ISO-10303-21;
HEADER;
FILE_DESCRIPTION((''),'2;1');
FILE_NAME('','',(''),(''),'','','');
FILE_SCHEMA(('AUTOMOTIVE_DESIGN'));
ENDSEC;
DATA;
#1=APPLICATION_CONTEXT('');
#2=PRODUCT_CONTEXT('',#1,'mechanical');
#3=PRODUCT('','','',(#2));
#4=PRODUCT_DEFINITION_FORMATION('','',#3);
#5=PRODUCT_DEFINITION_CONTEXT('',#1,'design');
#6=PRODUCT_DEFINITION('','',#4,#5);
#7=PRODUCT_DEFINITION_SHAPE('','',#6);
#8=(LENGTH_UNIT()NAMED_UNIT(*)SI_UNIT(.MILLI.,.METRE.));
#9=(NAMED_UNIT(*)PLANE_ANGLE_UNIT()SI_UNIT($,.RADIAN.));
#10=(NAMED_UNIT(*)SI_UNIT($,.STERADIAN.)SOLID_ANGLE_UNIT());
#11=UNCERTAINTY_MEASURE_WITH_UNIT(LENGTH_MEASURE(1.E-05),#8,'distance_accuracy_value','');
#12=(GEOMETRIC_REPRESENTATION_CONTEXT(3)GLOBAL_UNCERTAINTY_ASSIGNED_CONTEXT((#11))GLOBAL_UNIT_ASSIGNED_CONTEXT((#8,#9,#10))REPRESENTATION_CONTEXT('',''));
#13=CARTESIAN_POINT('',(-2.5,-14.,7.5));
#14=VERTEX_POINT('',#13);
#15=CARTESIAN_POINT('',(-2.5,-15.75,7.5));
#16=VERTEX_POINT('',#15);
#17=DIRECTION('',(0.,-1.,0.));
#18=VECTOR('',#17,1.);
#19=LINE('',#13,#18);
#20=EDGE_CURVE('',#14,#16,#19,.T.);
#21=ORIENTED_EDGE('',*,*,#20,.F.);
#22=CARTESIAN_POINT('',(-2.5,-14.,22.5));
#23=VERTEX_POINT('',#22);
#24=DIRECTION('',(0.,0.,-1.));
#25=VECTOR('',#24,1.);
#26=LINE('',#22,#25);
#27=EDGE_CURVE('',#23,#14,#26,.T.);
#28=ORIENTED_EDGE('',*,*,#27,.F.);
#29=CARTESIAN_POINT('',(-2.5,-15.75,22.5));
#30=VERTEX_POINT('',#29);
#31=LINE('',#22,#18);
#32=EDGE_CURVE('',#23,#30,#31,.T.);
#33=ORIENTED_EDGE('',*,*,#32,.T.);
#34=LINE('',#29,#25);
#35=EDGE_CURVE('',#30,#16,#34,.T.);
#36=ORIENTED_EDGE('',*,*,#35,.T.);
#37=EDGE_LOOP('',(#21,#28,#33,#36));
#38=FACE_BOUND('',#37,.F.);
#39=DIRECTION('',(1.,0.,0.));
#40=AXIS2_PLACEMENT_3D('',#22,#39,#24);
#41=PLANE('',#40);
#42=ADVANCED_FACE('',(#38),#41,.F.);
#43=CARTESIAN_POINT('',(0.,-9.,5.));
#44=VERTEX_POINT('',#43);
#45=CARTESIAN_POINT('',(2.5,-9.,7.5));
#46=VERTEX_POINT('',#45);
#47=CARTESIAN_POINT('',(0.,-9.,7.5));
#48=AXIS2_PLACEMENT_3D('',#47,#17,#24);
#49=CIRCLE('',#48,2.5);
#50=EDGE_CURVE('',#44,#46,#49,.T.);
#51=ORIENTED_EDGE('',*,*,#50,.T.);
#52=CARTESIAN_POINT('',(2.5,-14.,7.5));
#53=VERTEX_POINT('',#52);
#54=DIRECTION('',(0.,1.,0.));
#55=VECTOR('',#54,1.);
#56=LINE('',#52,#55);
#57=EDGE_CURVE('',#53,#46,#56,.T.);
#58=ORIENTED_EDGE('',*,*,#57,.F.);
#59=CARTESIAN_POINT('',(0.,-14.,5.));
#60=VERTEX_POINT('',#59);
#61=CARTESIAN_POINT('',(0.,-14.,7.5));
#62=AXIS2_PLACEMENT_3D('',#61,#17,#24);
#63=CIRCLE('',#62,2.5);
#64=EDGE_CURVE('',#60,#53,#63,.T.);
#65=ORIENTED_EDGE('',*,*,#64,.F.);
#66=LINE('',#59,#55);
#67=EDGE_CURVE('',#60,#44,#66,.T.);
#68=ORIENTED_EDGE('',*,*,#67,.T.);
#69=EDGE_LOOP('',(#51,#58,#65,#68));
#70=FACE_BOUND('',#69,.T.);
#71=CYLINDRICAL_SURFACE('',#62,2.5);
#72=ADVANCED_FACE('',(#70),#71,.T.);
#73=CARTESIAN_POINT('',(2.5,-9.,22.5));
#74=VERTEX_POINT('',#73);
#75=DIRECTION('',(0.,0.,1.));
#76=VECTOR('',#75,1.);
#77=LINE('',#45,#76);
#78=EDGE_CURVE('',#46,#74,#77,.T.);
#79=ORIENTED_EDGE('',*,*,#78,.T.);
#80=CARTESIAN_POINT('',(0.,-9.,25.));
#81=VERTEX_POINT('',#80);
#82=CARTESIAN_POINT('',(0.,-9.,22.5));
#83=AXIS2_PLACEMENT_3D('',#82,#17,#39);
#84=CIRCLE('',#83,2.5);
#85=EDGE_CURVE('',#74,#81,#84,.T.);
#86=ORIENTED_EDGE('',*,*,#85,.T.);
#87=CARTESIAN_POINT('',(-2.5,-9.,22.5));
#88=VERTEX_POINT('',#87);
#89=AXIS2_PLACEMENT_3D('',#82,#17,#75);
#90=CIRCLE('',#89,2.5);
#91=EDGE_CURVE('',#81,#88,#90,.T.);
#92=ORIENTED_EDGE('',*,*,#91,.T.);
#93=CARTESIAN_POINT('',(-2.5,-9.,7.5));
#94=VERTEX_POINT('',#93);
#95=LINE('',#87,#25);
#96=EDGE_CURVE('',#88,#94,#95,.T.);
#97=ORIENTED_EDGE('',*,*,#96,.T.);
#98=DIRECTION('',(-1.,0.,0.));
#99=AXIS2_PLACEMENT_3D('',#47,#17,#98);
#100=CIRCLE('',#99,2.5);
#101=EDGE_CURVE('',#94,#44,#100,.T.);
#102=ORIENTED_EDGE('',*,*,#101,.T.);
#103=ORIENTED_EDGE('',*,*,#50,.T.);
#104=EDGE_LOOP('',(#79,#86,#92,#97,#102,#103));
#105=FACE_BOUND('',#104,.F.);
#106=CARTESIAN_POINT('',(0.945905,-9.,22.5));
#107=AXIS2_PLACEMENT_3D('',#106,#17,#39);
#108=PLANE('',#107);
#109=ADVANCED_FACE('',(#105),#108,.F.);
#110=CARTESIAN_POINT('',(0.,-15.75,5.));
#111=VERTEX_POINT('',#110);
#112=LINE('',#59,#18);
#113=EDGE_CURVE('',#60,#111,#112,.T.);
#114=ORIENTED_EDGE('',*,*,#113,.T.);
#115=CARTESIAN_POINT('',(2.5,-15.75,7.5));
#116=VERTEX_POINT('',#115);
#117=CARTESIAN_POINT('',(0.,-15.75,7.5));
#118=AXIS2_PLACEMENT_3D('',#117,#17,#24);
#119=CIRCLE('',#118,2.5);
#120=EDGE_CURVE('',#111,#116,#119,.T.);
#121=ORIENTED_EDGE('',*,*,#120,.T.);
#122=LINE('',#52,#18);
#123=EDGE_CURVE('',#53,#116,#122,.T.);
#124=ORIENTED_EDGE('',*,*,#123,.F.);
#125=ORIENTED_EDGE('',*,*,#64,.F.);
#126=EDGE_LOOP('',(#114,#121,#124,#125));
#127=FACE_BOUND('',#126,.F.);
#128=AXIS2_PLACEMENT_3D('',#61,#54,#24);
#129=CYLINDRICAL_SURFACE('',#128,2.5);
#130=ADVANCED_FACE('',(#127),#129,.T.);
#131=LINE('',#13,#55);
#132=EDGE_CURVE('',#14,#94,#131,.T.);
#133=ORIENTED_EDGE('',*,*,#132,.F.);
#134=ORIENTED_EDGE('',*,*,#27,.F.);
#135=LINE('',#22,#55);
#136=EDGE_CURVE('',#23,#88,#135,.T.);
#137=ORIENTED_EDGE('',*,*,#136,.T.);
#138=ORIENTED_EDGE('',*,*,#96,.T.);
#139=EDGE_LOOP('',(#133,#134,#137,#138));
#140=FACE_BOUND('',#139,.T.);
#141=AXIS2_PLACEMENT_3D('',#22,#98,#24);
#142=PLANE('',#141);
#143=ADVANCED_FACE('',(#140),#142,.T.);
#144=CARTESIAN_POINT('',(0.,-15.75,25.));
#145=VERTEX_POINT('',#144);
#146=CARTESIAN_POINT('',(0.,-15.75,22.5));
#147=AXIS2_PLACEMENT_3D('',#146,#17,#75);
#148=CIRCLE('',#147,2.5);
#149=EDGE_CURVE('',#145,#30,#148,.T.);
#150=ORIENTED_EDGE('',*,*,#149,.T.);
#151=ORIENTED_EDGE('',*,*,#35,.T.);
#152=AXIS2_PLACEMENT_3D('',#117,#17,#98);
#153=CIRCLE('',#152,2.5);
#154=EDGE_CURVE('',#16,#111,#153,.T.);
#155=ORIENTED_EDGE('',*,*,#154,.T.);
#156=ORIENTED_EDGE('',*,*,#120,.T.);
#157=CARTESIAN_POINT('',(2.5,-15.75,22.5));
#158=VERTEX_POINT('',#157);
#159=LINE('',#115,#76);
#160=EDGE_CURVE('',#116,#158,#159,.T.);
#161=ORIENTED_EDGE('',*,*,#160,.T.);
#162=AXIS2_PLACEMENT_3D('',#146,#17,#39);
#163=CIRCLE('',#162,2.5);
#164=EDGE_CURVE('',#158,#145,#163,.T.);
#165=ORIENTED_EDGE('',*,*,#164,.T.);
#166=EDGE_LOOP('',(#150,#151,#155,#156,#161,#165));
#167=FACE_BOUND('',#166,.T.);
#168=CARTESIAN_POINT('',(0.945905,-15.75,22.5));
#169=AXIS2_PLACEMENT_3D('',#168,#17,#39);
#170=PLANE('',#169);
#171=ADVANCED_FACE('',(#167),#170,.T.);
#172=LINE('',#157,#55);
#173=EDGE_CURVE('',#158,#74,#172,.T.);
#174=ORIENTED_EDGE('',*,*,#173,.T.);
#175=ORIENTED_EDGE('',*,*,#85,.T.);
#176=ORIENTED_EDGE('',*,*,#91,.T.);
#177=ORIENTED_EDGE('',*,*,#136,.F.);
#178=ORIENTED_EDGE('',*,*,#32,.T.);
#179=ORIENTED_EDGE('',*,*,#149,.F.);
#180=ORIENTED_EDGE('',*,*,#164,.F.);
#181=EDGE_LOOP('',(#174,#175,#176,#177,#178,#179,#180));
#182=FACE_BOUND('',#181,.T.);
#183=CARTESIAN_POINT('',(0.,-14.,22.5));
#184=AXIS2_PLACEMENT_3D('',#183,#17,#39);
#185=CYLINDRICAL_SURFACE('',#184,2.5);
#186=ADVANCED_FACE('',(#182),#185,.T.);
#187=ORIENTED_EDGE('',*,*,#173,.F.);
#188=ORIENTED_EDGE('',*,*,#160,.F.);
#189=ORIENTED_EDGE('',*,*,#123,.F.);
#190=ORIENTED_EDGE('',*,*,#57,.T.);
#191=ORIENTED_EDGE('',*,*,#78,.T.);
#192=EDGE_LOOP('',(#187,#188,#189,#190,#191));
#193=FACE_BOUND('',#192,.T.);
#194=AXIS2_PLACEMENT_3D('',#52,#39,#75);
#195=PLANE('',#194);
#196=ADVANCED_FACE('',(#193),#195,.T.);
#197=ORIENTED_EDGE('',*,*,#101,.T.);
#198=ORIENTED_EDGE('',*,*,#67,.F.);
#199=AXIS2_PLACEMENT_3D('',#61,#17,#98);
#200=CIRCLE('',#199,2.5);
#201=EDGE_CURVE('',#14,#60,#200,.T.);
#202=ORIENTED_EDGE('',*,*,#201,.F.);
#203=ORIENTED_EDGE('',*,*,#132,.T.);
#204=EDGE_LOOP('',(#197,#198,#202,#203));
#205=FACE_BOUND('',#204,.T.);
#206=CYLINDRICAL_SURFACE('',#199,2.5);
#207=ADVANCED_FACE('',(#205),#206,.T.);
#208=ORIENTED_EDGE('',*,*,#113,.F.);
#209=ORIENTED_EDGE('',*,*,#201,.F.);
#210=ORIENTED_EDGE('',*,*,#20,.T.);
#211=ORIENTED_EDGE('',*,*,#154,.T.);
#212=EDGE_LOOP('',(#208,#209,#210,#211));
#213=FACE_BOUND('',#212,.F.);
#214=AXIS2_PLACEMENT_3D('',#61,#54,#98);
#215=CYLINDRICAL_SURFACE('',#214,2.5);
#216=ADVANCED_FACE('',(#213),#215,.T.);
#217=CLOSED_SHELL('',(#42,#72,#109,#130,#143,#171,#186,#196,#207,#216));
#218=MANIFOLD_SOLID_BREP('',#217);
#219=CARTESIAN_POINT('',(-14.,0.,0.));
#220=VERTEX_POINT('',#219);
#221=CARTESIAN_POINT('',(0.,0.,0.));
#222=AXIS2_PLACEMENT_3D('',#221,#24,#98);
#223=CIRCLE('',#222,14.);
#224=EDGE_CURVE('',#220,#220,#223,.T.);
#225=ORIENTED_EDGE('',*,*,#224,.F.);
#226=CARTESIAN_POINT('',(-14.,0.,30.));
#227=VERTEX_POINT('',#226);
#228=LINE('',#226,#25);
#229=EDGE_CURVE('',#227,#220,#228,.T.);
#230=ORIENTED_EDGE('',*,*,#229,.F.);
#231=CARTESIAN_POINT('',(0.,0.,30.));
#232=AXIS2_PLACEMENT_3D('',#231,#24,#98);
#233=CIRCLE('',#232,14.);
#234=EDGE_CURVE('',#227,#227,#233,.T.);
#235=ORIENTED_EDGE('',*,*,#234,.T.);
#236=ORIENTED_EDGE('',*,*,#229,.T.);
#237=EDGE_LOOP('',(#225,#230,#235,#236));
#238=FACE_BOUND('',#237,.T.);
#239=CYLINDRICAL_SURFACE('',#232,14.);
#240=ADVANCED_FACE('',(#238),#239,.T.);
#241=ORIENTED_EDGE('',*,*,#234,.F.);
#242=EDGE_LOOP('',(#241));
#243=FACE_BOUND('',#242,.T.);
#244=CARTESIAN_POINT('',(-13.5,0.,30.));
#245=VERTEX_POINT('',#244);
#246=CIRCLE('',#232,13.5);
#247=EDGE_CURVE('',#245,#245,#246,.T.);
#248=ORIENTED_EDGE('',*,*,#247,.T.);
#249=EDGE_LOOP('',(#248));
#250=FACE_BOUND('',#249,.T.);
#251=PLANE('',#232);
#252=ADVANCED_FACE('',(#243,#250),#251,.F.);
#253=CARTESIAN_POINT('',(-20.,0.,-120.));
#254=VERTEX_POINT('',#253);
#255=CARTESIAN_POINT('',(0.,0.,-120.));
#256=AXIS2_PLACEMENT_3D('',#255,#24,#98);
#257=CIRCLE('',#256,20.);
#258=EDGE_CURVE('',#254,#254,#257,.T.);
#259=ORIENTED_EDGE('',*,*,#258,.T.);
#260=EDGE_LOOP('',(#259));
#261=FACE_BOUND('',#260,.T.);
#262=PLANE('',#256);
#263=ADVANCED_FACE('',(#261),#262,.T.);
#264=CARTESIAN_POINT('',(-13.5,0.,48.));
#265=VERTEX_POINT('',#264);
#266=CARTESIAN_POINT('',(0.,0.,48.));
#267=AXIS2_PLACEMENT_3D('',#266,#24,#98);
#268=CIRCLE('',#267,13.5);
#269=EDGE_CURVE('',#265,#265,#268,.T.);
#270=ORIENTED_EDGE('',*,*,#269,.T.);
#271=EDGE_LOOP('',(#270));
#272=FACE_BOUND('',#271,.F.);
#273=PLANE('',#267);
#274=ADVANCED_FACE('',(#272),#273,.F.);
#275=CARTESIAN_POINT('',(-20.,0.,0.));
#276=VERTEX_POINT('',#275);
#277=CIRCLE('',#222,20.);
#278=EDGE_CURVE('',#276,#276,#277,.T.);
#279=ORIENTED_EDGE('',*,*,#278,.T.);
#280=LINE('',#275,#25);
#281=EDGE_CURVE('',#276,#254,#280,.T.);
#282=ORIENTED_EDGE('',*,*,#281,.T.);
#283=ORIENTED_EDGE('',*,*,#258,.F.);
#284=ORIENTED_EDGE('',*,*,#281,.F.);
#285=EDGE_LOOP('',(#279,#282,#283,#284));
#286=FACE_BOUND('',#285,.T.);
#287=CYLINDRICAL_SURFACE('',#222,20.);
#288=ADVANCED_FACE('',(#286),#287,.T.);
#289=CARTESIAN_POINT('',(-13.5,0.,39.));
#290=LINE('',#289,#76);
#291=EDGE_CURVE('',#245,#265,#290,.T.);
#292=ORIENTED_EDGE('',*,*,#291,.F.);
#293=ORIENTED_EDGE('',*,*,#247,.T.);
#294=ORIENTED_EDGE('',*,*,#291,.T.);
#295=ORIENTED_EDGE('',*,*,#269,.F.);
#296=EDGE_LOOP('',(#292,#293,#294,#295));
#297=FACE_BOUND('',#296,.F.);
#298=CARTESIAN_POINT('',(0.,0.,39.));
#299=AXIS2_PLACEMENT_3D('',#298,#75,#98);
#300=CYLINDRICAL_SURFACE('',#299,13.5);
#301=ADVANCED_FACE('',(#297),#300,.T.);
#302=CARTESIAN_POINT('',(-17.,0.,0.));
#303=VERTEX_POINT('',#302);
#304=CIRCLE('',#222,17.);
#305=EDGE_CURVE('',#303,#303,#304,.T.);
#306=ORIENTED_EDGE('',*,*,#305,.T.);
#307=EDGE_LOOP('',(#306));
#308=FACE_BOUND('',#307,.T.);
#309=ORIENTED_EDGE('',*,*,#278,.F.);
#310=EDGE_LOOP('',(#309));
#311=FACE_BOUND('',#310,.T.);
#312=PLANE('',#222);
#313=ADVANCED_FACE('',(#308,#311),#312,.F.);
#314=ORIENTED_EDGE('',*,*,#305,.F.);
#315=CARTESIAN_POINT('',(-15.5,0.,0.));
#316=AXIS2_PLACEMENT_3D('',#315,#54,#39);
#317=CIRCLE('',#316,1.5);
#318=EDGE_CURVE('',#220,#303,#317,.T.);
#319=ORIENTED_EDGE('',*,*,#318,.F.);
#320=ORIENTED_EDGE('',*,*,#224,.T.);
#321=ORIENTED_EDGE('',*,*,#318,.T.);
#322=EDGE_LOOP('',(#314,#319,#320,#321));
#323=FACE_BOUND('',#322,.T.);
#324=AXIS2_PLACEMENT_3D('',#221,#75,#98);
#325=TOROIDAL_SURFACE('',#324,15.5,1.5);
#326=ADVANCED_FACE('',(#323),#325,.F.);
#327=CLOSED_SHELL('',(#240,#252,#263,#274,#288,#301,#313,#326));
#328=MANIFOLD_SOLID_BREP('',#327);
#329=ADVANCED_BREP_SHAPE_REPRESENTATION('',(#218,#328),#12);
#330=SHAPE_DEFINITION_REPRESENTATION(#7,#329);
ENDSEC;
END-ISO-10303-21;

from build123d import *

# Parameters (mm, degrees)
F0_W          = 13.5
F0_H          = 18
F4_DEPTH      = 1.75
F4_DEPTH_BACK = 5


with BuildPart() as f1:
    # F0 (on Front) → F1 (revolve)
    with BuildSketch(Plane.XZ):
        with BuildLine():
            Line((0, -120), (0, 30))
            Line((0, 30), (-13.5, 30))
            Line((-13.5, 30), (-14, 30))
            Line((-14, 30), (-14, 0))
            ThreePointArc((-14, 0), (-15.5, -1.5), (-17, 0))
            Line((-17, 0), (-20, 0))
            Line((-20, 0), (-20, -120))
            Line((-20, -120), (0, -120))
        make_face()
        with Locations((-6.75, 39)):
            Rectangle(F0_W, F0_H)
    revolve(axis=Axis((0, 0, -45), (0, 0, -1)))


with BuildPart() as f4:
    # F3 (on offset) → F4 (new body, two sides)
    with BuildSketch(Plane.XZ.offset(14)) as f4_sk:
        with BuildLine():
            Line((0, 25), (0, 22.5))
            Line((0, 22.5), (0, 20))
            ThreePointArc((0, 20), (1.767766953, 20.732233047), (2.5, 22.5))
            ThreePointArc((2.5, 22.5), (1.767766953, 24.267766953), (0, 25))
        make_face()
        with BuildLine():
            Line((0, 20), (0, 22.5))
            Line((0, 22.5), (0, 25))
            ThreePointArc((0, 25), (-1.767766953, 24.267766953), (-2.5, 22.5))
            ThreePointArc((-2.5, 22.5), (-1.767766953, 20.732233047), (0, 20))
        make_face()
        with BuildLine():
            ThreePointArc((2.5, 22.5), (1.767766953, 20.732233047), (0, 20))
            Line((0, 20), (0, 10))
            ThreePointArc((0, 10), (1.767766953, 9.267766953), (2.5, 7.5))
            Line((2.5, 7.5), (2.5, 22.5))
        make_face()
        with BuildLine():
            Line((0, 10), (0, 20))
            ThreePointArc((0, 20), (-1.767766953, 20.732233047), (-2.5, 22.5))
            Line((-2.5, 22.5), (-2.5, 7.5))
            ThreePointArc((-2.5, 7.5), (-1.767766953, 9.267766953), (0, 10))
        make_face()
        with BuildLine():
            ThreePointArc((2.5, 7.5), (1.767766953, 9.267766953), (0, 10))
            Line((0, 10), (0, 7.5))
            Line((0, 7.5), (0, 5))
            ThreePointArc((0, 5), (1.767766953, 5.732233047), (2.5, 7.5))
        make_face()
        with BuildLine():
            Line((0, 7.5), (0, 10))
            ThreePointArc((0, 10), (-1.767766953, 9.267766953), (-2.5, 7.5))
            ThreePointArc((-2.5, 7.5), (-1.767766953, 5.732233047), (0, 5))
            Line((0, 5), (0, 7.5))
        make_face()
    extrude(amount=F4_DEPTH)
    extrude(f4_sk.sketch, amount=-F4_DEPTH_BACK)


solid = Compound([f1.part, f4.part])
